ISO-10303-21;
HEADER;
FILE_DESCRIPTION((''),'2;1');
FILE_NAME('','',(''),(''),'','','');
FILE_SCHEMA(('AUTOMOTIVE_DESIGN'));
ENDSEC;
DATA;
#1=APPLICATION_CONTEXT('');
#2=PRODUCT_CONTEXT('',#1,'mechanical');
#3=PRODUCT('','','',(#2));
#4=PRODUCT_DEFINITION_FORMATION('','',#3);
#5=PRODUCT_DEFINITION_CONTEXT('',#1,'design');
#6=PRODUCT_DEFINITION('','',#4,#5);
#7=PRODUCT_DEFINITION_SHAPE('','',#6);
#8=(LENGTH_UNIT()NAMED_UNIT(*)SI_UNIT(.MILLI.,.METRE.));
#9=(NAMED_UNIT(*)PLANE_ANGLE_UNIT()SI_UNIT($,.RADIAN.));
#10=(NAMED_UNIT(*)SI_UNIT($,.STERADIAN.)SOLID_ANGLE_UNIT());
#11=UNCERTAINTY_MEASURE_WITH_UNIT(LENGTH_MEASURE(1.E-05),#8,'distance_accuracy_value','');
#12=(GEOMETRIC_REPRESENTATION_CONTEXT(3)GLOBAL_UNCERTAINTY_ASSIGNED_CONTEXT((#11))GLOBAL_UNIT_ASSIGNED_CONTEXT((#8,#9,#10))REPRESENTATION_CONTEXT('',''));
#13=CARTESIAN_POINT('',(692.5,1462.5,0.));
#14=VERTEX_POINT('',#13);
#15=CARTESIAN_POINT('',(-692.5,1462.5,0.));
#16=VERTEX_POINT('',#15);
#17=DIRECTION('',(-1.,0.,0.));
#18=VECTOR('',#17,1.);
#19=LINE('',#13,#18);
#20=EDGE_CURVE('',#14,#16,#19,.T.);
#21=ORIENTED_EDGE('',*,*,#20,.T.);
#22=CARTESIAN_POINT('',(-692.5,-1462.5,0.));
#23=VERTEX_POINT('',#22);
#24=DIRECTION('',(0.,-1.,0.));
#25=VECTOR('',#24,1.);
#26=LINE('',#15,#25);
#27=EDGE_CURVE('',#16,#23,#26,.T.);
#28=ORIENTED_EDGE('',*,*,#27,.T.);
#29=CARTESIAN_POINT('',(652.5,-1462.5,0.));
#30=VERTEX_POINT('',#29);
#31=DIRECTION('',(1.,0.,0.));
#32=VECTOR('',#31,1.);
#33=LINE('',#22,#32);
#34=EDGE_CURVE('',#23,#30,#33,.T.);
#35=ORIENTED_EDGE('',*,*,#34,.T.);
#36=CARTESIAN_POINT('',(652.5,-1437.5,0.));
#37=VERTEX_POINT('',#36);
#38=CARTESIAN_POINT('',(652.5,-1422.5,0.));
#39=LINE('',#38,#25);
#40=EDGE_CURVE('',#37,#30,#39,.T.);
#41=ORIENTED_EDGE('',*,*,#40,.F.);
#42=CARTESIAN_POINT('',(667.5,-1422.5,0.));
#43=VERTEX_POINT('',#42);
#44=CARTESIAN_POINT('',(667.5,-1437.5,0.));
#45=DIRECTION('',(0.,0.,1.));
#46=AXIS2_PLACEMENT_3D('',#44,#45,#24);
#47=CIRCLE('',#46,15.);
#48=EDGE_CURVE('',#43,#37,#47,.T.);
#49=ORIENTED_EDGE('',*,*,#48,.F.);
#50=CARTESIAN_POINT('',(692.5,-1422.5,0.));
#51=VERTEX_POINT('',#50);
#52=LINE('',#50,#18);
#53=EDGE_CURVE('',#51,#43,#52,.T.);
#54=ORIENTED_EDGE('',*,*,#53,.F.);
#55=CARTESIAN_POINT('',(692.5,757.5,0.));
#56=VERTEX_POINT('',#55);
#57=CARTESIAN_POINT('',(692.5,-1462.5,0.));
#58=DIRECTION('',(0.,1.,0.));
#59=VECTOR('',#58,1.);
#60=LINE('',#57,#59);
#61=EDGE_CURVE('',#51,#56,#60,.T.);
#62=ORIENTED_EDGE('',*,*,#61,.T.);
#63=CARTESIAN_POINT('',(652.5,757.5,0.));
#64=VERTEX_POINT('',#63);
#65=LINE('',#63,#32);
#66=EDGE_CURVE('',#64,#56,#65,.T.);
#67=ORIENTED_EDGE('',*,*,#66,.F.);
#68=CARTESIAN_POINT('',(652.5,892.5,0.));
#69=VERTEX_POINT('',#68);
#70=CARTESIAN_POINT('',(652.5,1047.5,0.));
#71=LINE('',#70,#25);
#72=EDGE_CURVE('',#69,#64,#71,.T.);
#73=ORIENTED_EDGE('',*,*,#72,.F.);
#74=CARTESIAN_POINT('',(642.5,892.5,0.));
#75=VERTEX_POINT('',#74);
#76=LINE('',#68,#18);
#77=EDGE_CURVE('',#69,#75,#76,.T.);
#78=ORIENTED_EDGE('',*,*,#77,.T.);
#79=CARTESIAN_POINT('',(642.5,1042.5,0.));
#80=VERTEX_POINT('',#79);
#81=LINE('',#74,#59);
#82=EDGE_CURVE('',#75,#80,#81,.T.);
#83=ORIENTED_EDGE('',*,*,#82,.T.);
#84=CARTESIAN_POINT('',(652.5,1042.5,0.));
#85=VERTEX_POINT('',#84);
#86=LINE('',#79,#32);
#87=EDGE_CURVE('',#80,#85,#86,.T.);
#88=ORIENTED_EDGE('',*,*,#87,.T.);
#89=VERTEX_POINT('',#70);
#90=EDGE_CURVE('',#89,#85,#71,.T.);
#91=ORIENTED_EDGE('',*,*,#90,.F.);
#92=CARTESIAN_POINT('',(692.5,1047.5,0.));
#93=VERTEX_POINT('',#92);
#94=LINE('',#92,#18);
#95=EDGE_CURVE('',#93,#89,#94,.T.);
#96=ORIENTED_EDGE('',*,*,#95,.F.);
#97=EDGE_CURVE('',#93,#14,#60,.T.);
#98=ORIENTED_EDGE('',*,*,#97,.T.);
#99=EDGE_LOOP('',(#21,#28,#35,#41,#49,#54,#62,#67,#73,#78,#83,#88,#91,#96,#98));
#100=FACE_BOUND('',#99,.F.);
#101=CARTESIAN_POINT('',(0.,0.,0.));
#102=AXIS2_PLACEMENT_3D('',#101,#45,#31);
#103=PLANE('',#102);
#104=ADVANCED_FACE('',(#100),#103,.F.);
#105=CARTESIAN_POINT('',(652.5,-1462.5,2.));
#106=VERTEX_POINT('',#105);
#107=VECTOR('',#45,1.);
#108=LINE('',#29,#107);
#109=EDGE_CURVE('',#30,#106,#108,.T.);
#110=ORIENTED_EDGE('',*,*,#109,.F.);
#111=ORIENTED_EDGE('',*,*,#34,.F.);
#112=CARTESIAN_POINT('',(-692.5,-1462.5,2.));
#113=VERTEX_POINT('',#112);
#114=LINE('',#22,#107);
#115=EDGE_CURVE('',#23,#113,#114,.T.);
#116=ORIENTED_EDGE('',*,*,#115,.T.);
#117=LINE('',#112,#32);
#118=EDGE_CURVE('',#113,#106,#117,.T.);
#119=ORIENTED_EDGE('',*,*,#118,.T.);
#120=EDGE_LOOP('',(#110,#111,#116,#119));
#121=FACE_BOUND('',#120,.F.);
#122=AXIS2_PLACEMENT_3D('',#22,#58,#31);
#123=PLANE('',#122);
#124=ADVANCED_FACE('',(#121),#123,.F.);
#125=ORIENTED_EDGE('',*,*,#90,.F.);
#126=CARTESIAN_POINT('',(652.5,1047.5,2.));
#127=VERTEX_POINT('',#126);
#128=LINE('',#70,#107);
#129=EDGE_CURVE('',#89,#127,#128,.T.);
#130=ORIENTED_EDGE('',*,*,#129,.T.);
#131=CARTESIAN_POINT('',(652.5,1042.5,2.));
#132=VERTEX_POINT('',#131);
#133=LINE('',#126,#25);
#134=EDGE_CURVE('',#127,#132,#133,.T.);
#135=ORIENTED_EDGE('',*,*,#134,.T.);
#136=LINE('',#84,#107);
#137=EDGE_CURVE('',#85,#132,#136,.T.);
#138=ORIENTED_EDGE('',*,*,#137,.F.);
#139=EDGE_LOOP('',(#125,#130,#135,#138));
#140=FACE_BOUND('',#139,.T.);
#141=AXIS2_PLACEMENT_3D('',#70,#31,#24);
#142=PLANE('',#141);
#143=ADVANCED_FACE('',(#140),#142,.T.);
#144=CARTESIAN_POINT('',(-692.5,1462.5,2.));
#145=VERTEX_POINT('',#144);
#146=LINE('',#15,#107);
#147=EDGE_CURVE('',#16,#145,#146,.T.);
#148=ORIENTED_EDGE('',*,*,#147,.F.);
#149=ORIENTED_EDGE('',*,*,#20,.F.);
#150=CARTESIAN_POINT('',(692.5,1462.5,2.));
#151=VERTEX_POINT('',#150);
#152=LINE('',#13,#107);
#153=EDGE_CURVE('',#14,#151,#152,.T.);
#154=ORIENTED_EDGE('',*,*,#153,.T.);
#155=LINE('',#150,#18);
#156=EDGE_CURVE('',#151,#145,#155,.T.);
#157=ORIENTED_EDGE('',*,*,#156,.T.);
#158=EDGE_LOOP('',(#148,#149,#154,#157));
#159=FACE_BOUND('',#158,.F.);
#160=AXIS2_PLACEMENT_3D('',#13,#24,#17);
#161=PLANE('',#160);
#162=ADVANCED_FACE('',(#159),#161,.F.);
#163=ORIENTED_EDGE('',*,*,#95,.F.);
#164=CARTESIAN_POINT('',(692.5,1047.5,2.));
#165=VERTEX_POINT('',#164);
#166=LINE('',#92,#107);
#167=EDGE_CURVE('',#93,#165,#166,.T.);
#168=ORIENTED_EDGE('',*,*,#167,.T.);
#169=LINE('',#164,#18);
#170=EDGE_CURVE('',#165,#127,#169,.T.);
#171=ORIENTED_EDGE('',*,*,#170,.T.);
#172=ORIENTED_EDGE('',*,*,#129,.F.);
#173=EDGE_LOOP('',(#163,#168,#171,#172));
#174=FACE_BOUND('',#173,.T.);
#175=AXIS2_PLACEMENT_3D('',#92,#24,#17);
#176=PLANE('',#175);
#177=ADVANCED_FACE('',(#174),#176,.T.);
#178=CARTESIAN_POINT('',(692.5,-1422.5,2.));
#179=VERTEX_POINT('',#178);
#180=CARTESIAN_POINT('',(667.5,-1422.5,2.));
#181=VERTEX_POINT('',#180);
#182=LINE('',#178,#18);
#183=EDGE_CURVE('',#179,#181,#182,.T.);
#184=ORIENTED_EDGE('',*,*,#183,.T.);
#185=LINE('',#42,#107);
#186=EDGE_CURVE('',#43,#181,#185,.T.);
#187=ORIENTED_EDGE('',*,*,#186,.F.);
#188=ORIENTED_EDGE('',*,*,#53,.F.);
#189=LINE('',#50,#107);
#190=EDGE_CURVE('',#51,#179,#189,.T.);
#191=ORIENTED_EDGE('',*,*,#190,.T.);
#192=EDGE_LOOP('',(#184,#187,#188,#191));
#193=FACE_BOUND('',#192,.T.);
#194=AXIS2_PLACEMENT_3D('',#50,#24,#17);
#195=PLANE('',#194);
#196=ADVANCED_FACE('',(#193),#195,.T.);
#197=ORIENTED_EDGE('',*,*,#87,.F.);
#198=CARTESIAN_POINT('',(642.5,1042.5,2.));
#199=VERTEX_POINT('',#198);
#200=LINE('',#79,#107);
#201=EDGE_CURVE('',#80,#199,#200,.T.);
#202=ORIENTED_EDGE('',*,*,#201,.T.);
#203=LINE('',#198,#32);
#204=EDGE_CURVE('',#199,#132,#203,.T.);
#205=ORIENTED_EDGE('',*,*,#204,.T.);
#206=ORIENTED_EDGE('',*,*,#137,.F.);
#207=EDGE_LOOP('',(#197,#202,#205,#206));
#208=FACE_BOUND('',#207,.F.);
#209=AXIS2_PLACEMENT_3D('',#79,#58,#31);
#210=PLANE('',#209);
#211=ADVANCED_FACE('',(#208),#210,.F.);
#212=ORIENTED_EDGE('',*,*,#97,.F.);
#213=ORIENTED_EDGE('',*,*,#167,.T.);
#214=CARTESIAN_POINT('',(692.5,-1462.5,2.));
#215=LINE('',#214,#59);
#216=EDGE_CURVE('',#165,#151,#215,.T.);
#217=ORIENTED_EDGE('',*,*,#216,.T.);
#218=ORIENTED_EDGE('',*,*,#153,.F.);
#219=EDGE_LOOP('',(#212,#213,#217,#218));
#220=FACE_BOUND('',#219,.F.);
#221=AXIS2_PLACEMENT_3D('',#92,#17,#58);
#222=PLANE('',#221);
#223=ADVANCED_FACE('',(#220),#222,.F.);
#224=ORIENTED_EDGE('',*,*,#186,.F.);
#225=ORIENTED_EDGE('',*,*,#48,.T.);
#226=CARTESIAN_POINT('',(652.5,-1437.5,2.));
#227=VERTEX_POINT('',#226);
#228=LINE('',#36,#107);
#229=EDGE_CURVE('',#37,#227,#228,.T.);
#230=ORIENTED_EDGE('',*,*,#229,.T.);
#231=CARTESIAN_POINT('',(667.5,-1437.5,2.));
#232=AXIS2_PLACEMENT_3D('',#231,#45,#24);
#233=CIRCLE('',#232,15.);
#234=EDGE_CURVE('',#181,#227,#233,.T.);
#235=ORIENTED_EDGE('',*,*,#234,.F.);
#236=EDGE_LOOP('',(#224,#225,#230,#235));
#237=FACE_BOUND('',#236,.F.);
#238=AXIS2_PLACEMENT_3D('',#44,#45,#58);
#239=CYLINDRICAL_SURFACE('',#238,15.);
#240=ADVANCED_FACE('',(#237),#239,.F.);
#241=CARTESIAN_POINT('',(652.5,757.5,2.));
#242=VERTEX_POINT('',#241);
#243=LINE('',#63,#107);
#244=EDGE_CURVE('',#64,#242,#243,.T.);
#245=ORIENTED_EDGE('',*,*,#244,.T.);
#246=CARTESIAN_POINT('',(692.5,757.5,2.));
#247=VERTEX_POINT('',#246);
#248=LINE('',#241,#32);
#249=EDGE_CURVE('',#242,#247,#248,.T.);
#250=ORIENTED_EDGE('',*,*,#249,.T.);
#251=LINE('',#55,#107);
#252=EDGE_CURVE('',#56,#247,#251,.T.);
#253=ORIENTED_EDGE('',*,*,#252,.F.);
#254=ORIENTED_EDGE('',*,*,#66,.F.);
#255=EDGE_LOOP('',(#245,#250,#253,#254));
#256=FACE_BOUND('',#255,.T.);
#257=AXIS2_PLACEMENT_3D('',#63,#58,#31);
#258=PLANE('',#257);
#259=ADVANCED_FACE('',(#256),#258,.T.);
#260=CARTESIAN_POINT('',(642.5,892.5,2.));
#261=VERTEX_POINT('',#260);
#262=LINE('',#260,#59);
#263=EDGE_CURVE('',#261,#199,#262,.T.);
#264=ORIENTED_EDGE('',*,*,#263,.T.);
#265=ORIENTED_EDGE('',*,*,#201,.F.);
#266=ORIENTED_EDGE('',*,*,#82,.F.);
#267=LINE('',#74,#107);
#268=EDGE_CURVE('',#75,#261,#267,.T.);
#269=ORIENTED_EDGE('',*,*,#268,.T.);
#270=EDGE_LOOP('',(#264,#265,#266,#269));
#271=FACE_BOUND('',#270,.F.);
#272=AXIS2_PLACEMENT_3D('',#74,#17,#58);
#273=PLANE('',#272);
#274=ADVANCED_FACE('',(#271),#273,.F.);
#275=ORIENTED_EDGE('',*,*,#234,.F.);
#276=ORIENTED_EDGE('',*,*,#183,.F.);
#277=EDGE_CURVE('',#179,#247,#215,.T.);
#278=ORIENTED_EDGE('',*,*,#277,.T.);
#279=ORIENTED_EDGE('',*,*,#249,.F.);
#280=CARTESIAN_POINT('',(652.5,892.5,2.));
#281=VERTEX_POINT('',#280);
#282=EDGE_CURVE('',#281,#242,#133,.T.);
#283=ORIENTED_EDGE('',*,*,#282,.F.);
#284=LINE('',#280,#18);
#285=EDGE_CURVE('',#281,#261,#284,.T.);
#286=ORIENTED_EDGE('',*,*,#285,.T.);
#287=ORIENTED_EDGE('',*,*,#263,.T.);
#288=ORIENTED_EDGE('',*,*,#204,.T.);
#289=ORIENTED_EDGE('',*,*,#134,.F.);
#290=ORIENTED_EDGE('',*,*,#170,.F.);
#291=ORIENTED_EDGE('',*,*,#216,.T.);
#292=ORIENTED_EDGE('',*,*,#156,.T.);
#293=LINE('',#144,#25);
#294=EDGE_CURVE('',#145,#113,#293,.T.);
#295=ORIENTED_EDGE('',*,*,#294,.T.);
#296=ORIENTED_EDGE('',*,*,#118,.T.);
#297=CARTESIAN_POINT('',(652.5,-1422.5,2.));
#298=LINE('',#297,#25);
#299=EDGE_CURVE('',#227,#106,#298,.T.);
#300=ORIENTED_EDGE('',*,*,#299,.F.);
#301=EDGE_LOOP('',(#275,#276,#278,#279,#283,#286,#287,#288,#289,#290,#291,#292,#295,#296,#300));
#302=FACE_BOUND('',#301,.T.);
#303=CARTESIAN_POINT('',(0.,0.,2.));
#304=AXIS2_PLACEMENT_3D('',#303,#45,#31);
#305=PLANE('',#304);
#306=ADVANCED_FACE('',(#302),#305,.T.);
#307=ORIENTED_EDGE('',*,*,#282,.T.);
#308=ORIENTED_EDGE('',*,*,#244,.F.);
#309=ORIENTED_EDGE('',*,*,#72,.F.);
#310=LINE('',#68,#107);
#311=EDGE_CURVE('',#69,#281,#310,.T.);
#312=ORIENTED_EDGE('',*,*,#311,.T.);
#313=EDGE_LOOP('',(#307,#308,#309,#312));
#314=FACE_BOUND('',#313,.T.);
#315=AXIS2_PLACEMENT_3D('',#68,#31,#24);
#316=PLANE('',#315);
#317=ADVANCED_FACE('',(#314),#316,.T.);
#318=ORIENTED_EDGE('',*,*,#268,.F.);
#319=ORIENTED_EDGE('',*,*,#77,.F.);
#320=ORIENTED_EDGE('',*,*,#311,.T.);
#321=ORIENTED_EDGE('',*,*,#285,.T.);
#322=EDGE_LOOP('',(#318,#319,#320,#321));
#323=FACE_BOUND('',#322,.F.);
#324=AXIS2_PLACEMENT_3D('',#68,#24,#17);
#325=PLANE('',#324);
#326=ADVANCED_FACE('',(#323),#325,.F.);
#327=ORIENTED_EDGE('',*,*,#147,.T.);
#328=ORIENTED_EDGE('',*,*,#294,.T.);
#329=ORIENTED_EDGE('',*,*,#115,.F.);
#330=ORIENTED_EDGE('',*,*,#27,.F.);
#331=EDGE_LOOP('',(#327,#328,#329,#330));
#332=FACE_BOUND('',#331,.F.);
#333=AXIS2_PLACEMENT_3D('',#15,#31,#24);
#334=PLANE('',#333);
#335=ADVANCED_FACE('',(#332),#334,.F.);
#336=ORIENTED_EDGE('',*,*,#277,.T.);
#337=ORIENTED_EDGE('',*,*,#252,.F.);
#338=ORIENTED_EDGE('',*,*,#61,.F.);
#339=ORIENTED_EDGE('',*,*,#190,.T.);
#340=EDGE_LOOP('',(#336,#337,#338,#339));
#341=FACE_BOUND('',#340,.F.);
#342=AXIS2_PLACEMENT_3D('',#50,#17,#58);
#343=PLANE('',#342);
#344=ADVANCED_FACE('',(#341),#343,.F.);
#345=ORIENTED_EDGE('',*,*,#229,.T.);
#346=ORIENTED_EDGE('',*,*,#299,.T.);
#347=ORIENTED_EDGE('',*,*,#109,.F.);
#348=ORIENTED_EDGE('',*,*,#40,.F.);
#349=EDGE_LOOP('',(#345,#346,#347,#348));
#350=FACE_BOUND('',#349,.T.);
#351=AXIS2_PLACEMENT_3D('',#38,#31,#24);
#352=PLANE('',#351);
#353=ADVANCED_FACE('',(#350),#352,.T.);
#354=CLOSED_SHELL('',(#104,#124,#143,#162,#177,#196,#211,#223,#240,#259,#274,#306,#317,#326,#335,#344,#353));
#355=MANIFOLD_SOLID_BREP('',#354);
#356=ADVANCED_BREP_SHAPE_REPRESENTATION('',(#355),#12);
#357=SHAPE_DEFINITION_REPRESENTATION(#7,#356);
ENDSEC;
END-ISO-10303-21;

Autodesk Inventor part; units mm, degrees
ref_plane "YZ Plane" through (0, 0, 0) normal (1, 0, 0) x (0, 1, 0)
ref_plane "XZ Plane" through (0, 0, 0) normal (0, 1, 0) x (-1, 0, 0)
ref_plane "XY Plane" through (0, 0, 0) normal (0, 0, 1) x (1, 0, 0)
sketch "Sketch1" plane through (0, 0, 0) normal (0, 0, 1) x (1, 0, 0)
  line L0 (-692.5, -1462.5) -> (692.5, -1462.5)
  line L1 (692.5, -1462.5) -> (692.5, 1462.5)
  line L2 (692.5, 1462.5) -> (-692.5, 1462.5)
  line L3 (-692.5, 1462.5) -> (-692.5, -1462.5)
  line L4 (-692.5, -1462.5) -> (692.5, 1462.5) construction
  line L5 (692.5, -1462.5) -> (-692.5, 1462.5) construction
  line L6 (692.5, -1422.5) -> (652.5, -1422.5)
  line L7 (652.5, -1422.5) -> (652.5, -1462.5)
  line L8 (692.5, 1047.5) -> (652.5, 1047.5)
  line L9 (652.5, 1047.5) -> (652.5, 757.5)
  line L10 (652.5, 757.5) -> (692.5, 757.5)
  line L11 (692.5, 757.5) -> (692.5, 1047.5)
  line L12 (652.5, 892.5) -> (642.5, 892.5)
  line L13 (642.5, 892.5) -> (642.5, 1042.5)
  line L14 (642.5, 1042.5) -> (652.5, 1042.5)
  point P0 (0, 0)
  dimension "d154" = 1385
  dimension "d155" = 2925
  dimension "d157" = 40
  dimension "d159" = 290
  dimension "d161" = 40
  dimension "d162" = 2220
  dimension "d163" = 10
  dimension "d164" = 150
  dimension "d165" = 5
extrude "Plate5" add sketch "Sketch1" along normal blind 2 contours L3 L2 L1 L8 L9 L14 L13 L12 L10 L6 L7 L0
fillet "Corner Round1" radius 15 1 edges at (652.5, -1422.5, 1)
properties part number "PNS-0113 floor sheet 31" material "Stainless Steel"
